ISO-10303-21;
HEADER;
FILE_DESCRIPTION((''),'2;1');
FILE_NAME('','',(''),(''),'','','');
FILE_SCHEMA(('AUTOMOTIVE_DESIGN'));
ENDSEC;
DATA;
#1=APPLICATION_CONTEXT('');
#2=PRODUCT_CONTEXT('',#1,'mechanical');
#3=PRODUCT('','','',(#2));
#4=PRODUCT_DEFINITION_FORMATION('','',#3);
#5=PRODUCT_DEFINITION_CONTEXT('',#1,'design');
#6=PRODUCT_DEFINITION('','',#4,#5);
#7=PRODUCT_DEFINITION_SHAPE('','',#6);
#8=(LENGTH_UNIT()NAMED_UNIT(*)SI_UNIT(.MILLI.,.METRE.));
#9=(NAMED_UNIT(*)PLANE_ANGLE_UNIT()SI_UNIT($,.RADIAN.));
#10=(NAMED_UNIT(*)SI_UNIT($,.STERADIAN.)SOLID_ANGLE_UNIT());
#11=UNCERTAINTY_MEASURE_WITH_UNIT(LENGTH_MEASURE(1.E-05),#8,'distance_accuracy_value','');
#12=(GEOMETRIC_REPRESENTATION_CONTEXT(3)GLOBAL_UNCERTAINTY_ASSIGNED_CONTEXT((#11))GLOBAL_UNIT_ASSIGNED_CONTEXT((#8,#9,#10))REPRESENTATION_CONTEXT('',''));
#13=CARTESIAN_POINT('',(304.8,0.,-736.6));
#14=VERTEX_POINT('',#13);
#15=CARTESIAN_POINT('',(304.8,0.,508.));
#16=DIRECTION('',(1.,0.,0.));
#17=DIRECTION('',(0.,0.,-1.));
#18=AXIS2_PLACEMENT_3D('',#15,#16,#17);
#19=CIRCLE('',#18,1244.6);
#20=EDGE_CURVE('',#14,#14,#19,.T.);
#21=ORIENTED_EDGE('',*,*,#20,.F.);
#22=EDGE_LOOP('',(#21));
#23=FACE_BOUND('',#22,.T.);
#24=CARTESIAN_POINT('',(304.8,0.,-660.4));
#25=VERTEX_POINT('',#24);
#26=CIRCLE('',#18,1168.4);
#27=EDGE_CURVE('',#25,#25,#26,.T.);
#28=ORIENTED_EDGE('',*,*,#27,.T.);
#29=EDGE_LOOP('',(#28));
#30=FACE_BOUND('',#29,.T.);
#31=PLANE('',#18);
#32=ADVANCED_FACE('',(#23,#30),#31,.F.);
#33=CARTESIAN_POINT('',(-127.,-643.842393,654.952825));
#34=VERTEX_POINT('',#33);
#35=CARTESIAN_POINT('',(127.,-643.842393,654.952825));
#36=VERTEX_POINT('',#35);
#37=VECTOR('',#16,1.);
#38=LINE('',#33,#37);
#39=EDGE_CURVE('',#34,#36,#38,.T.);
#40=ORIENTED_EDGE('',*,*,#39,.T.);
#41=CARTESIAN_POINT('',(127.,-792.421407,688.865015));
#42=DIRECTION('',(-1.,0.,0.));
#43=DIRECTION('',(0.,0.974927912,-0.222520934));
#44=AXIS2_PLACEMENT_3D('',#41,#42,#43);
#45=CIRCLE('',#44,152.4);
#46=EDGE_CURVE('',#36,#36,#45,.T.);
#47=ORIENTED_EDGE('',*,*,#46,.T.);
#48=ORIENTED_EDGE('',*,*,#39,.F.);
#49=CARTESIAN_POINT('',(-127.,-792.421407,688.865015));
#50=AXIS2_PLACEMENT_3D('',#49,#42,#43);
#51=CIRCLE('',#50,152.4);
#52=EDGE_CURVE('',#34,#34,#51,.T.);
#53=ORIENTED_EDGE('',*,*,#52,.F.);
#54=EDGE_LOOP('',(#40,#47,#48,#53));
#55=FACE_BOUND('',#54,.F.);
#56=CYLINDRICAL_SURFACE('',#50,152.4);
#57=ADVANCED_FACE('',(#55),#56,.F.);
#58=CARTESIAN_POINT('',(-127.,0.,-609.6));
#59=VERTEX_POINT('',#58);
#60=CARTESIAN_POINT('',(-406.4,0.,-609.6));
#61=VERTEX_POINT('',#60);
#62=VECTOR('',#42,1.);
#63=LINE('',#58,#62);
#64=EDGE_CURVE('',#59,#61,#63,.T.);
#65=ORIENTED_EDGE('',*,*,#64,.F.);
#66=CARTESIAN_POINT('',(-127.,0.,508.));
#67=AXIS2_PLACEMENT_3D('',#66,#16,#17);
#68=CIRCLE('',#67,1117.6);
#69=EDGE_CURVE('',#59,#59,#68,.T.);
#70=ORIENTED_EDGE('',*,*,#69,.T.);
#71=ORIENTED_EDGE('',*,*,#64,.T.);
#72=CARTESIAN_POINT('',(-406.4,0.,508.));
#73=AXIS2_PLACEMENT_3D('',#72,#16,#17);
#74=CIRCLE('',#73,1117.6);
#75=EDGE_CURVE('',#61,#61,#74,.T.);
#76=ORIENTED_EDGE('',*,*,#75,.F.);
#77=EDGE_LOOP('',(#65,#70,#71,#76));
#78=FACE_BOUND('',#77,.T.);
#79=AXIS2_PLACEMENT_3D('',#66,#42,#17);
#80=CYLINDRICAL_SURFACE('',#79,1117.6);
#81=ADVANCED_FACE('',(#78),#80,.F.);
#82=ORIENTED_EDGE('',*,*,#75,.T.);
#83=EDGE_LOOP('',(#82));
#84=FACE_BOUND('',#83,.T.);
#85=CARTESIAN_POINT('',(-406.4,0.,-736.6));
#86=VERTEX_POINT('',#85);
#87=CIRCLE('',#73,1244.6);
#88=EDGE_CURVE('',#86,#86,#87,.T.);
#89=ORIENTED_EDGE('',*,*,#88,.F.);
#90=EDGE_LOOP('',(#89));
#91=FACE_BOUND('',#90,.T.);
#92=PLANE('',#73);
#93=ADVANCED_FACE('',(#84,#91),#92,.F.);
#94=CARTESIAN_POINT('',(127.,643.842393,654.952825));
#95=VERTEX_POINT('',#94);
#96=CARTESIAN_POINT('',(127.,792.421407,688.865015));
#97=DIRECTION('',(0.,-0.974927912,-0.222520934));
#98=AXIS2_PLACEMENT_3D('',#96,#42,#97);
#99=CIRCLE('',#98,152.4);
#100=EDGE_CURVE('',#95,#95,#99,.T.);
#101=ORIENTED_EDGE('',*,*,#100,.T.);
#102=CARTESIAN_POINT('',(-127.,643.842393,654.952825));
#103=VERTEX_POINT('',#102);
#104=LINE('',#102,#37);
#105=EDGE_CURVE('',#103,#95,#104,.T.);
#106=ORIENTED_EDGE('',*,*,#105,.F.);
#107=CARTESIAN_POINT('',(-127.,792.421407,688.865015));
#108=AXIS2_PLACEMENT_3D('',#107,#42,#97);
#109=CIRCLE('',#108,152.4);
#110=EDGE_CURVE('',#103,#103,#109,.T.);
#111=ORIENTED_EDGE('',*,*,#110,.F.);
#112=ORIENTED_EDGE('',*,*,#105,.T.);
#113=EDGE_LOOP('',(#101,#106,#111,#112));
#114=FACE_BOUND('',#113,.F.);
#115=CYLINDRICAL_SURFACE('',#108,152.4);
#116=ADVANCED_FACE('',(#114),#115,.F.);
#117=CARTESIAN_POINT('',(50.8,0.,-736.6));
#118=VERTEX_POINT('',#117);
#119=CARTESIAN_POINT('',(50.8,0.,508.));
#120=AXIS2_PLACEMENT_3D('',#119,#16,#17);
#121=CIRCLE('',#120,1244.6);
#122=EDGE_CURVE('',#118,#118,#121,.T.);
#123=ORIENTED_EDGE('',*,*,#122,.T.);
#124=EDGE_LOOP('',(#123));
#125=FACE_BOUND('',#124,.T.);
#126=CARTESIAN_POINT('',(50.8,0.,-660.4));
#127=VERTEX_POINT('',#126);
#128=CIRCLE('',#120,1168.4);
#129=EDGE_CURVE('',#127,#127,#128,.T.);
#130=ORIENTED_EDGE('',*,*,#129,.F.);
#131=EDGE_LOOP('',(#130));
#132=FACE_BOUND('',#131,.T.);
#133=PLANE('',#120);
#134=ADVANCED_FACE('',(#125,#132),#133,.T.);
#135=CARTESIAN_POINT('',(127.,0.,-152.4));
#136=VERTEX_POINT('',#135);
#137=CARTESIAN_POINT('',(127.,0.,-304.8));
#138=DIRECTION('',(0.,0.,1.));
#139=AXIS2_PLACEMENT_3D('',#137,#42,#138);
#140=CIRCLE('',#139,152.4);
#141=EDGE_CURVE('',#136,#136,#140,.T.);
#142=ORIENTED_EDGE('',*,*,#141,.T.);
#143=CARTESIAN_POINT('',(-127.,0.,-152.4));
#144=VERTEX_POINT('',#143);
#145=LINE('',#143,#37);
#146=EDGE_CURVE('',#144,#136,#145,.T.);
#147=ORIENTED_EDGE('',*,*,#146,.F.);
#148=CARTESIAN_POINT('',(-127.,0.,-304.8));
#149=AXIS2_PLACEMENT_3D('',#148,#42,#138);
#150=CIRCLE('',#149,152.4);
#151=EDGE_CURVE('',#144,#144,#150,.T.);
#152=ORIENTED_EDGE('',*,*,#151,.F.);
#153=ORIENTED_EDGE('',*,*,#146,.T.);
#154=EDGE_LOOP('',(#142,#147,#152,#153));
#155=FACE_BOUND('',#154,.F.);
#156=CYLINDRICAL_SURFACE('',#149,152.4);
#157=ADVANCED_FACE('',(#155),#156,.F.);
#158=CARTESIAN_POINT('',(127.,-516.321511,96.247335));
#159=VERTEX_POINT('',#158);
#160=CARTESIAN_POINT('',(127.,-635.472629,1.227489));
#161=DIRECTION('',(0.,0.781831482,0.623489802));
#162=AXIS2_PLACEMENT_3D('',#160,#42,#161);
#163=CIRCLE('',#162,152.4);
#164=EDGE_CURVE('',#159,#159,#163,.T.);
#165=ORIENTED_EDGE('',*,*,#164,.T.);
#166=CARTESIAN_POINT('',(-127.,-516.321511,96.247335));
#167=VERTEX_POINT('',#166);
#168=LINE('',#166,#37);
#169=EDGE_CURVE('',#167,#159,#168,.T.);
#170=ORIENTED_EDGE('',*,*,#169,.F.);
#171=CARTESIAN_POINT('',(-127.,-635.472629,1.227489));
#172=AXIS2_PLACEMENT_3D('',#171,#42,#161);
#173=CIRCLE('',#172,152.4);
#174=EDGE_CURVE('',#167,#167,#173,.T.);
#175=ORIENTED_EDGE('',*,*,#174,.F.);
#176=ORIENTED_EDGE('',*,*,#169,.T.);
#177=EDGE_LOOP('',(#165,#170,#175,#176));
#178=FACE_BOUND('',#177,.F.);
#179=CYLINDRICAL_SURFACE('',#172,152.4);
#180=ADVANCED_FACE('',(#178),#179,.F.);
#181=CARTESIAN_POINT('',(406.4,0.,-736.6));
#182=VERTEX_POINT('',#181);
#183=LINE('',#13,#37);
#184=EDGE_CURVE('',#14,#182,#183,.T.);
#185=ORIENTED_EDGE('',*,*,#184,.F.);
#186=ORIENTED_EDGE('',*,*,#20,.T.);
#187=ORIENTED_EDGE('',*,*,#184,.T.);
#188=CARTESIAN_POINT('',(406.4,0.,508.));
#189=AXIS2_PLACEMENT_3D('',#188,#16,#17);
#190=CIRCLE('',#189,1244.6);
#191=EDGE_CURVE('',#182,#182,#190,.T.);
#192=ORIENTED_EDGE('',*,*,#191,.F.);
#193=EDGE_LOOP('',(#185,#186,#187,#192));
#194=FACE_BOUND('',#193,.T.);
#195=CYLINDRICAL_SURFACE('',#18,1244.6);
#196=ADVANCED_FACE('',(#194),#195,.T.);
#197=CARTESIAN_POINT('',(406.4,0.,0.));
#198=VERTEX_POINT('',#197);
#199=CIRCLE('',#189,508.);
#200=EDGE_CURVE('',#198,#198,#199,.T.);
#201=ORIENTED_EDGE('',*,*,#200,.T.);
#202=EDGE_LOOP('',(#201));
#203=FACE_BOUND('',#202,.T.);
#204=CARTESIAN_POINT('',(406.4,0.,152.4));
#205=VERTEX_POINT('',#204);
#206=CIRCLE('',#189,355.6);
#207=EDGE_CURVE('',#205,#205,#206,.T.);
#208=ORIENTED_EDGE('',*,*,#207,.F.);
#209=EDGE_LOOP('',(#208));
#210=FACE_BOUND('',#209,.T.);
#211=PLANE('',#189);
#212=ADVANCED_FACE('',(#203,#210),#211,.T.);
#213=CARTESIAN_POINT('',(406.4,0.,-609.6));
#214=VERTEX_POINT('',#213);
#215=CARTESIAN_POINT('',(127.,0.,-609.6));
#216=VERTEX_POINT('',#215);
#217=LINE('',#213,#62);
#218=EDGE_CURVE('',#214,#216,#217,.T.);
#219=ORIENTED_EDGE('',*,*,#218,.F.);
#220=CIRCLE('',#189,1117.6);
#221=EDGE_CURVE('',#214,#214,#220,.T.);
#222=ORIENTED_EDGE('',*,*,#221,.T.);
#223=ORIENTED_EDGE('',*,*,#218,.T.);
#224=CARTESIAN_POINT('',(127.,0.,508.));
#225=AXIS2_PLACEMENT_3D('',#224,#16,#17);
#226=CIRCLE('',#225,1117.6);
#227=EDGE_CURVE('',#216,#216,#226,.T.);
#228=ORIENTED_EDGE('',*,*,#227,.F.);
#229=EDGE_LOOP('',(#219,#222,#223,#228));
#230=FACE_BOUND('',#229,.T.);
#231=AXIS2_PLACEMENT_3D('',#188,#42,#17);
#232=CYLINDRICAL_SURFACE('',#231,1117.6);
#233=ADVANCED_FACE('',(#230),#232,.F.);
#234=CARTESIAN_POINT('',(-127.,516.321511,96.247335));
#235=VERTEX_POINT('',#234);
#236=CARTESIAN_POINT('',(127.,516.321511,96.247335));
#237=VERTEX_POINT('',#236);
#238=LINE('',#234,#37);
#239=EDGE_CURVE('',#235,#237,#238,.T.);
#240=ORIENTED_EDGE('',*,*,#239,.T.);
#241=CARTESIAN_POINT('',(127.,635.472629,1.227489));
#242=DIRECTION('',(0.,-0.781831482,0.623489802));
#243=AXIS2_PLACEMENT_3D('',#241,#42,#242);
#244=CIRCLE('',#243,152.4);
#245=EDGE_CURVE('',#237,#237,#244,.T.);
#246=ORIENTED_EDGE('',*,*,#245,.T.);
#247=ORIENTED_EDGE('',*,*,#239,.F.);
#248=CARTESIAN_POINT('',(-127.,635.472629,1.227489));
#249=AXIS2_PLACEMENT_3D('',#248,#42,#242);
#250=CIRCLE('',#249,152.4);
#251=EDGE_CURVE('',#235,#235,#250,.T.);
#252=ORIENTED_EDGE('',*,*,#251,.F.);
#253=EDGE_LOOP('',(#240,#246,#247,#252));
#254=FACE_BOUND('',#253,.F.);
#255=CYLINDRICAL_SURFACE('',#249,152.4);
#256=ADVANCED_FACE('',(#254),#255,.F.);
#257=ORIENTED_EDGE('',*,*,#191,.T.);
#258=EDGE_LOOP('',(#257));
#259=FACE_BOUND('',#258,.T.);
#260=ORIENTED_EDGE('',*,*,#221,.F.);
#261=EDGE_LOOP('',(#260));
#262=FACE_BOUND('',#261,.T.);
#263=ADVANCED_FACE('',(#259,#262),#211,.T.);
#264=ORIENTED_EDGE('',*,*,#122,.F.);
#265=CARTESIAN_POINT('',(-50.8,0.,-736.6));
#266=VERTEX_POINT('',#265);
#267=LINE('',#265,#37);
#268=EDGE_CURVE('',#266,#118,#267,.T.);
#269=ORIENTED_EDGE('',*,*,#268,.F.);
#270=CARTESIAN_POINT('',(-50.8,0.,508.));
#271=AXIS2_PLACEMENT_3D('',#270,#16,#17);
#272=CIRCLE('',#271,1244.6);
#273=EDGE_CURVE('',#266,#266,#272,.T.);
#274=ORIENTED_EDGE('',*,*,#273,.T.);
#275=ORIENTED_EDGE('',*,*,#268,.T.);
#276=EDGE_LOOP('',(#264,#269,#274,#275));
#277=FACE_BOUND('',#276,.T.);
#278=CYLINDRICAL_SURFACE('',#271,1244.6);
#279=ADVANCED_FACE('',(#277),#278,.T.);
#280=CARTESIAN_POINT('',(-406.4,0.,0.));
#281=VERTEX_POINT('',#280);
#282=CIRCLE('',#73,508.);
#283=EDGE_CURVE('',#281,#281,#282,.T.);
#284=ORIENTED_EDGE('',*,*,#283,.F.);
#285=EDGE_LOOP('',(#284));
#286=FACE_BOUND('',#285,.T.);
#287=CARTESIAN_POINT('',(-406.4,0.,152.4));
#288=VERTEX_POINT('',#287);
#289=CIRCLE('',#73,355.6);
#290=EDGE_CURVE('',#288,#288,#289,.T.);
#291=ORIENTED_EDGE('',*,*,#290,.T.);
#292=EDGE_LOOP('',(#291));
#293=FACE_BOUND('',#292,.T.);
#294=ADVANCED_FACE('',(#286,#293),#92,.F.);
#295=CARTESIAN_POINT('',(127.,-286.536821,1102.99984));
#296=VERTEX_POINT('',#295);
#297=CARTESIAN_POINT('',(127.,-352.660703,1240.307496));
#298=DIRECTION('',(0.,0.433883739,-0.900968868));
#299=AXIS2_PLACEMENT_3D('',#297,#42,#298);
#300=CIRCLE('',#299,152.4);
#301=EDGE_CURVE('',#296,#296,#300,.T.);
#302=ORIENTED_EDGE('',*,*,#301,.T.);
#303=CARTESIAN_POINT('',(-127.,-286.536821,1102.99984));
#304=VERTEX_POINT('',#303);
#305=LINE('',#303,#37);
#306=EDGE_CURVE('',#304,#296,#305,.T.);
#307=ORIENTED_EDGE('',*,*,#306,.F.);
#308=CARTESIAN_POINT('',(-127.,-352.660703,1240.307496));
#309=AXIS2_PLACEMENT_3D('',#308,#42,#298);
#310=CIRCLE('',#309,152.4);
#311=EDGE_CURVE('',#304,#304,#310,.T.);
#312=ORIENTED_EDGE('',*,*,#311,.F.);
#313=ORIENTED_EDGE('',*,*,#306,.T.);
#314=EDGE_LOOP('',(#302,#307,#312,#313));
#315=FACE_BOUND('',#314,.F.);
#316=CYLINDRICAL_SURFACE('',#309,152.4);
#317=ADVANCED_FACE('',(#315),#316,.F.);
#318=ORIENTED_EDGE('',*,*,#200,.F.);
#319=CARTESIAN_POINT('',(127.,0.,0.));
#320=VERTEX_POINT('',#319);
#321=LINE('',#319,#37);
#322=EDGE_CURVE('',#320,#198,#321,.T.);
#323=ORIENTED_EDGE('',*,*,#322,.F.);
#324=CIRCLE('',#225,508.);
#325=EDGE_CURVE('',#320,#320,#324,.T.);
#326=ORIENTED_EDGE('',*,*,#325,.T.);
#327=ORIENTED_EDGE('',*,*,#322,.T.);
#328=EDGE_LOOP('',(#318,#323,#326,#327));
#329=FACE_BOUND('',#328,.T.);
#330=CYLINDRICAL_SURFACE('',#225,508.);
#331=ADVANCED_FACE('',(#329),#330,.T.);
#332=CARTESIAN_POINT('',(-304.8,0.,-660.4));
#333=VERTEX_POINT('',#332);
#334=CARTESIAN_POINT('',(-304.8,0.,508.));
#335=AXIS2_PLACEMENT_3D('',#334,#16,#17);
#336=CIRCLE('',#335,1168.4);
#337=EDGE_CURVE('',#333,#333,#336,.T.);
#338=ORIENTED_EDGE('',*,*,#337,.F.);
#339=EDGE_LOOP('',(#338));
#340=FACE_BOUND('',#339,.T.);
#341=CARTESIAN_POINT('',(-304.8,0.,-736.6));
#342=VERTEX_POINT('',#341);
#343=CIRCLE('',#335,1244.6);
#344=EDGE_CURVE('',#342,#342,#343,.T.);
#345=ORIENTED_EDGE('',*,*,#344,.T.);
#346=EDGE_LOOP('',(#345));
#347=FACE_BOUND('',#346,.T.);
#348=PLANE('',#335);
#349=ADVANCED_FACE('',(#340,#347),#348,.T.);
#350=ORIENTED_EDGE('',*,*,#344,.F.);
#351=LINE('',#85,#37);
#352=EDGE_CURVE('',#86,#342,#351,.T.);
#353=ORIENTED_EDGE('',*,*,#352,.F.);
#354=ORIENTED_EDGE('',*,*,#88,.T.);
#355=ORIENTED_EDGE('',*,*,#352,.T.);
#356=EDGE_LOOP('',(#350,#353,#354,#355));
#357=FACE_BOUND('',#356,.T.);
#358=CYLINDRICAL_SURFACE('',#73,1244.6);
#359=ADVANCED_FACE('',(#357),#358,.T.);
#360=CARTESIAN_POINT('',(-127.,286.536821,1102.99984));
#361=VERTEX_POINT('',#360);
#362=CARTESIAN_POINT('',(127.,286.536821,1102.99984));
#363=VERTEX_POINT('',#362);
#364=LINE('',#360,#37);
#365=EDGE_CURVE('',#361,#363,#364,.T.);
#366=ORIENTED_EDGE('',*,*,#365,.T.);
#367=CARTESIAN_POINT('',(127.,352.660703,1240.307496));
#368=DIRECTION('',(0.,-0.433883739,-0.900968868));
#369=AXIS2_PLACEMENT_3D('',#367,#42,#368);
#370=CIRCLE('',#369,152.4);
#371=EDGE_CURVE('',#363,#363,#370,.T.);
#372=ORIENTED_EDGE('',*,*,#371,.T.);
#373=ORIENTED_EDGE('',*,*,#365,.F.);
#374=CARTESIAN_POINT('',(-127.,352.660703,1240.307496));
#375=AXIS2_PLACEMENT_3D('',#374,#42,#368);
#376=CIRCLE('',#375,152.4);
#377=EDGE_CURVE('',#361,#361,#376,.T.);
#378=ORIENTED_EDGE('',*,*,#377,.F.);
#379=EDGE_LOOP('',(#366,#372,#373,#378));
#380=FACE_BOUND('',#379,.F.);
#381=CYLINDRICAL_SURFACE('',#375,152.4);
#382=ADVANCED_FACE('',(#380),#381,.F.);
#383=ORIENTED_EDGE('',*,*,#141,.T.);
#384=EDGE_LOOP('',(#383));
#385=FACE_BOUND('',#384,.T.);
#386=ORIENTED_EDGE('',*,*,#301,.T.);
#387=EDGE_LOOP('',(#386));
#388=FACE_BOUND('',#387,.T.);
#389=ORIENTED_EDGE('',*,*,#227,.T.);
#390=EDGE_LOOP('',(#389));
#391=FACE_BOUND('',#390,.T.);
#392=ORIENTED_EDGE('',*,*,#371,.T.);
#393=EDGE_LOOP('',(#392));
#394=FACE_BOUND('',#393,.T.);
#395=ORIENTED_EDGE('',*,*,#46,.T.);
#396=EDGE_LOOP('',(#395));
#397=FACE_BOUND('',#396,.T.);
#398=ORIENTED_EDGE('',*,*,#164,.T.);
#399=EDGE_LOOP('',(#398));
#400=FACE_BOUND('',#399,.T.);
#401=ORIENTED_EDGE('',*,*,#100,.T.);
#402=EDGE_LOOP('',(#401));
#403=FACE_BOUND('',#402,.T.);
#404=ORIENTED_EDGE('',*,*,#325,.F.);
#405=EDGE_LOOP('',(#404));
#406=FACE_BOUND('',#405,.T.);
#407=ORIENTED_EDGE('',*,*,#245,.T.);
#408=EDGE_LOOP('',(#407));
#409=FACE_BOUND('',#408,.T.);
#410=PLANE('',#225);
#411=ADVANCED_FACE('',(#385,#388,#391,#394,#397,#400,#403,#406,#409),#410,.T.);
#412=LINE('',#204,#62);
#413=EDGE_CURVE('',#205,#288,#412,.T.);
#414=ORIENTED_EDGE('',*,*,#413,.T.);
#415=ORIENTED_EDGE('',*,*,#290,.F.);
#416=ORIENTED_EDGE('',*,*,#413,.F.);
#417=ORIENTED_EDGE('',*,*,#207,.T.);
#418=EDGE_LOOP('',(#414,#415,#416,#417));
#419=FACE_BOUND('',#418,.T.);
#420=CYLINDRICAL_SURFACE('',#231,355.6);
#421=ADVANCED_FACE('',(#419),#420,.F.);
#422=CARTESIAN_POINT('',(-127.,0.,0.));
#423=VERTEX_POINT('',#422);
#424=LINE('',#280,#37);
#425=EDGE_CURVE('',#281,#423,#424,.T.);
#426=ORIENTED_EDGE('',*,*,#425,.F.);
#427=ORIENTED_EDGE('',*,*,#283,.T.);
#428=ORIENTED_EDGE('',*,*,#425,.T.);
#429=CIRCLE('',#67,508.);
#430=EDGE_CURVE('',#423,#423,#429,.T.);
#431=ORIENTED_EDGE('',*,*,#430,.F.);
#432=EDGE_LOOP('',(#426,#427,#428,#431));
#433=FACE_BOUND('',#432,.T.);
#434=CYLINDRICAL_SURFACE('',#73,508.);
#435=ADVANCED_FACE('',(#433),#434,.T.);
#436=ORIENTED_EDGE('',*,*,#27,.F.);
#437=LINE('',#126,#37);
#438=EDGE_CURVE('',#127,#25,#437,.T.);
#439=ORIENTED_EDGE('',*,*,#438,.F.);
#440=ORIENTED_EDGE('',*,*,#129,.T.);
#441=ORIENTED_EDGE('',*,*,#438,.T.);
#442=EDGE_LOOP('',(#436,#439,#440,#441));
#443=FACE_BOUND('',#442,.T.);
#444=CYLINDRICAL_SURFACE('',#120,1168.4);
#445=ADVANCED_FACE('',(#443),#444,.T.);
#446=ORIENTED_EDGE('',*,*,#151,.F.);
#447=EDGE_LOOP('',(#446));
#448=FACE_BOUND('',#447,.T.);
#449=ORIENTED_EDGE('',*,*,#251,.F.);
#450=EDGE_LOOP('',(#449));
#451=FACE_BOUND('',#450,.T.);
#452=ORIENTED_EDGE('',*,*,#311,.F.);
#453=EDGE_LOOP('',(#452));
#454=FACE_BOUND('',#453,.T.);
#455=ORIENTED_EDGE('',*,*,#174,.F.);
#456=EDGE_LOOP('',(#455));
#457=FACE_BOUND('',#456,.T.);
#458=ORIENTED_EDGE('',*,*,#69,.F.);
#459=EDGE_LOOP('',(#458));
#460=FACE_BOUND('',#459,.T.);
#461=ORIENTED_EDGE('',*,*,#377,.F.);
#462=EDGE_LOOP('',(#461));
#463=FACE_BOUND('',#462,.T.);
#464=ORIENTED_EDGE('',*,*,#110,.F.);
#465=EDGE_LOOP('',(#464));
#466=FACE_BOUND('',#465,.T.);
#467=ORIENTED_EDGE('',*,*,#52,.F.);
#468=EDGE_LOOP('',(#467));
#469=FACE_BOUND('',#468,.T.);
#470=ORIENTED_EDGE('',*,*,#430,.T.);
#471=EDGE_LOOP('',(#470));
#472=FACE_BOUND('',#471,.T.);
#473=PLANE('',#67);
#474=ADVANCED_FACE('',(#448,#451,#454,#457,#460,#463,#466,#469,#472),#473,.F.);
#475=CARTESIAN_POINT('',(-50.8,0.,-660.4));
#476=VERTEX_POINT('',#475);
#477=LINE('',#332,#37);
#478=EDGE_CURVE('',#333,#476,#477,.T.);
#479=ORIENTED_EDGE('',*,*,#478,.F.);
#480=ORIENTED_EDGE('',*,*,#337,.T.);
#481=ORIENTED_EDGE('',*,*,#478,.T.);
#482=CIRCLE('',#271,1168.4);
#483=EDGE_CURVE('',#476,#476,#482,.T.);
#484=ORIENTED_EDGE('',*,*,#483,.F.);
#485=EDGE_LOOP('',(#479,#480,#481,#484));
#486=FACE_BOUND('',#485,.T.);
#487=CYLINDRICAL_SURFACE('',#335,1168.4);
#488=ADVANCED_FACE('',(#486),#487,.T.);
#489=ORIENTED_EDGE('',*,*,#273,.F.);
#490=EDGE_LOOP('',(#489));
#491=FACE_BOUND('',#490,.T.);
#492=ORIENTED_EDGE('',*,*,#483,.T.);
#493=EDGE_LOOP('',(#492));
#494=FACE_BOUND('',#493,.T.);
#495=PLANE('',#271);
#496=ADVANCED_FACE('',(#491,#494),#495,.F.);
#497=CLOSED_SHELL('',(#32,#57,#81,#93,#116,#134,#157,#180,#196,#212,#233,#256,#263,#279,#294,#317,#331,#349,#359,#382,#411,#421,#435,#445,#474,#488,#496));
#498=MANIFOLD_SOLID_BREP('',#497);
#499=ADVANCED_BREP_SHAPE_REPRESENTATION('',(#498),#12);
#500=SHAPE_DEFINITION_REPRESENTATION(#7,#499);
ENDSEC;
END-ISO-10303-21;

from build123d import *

# Parameters (mm, degrees)
F3_DEPTH        = 533.401
F3_COPIES_COUNT = 7


# Not quite as in the source:
# - a pattern or mirror of a feature is missing from the dataset's text; its kind, count and spacing are read off the source's solid
# - a feature names something its author has since deleted; it is built from what else it names


with BuildPart() as f1:
    # F0 (on Front) → F1 (revolve)
    with BuildSketch(Plane.XZ):
        Polygon((127, 0), (-127, 0), (-127, -609.6), (-406.4, -609.6), (-406.4, -736.6), (-304.8, -736.6), (-304.8, -660.4), (-50.8, -660.4), (-50.8, -736.6), (50.8, -736.6), (50.8, -660.4), (304.8, -660.4), (304.8, -736.6), (406.4, -736.6), (406.4, -609.6), (127, -609.6), align=None)
        Polygon((-406.4, 0), (-127, 0), (127, 0), (406.4, 0), (406.4, 152.4), (0, 152.4), (-406.4, 152.4), align=None)
    revolve(axis=Axis((0, 0, 508), (1, 0, 0)))

    # F2 (on face) → F3 (cut, through all)
    with BuildSketch(Plane(origin=(-127, 0, 0), x_dir=(0, -1, 0), z_dir=(-1, 0, 0))):
        with BuildLine():
            ThreePointArc((152.4, -304.8), (107.7630734528, -197.0369265472), (0, -152.4))
            ThreePointArc((0, -152.4), (-107.7630734528, -412.5630734528), (152.4, -304.8))
        make_face()
    f3 = extrude(amount=-F3_DEPTH, mode=Mode.SUBTRACT)

    # F3_copies: F3 ×7 about axis
    f3_copies_axis = Axis((0, 0, 508), (1, 0, 0))
    for i in range(1, F3_COPIES_COUNT):
        add(f3.rotate(f3_copies_axis, i * 360 / F3_COPIES_COUNT), mode=Mode.SUBTRACT)


solid = f1.part
